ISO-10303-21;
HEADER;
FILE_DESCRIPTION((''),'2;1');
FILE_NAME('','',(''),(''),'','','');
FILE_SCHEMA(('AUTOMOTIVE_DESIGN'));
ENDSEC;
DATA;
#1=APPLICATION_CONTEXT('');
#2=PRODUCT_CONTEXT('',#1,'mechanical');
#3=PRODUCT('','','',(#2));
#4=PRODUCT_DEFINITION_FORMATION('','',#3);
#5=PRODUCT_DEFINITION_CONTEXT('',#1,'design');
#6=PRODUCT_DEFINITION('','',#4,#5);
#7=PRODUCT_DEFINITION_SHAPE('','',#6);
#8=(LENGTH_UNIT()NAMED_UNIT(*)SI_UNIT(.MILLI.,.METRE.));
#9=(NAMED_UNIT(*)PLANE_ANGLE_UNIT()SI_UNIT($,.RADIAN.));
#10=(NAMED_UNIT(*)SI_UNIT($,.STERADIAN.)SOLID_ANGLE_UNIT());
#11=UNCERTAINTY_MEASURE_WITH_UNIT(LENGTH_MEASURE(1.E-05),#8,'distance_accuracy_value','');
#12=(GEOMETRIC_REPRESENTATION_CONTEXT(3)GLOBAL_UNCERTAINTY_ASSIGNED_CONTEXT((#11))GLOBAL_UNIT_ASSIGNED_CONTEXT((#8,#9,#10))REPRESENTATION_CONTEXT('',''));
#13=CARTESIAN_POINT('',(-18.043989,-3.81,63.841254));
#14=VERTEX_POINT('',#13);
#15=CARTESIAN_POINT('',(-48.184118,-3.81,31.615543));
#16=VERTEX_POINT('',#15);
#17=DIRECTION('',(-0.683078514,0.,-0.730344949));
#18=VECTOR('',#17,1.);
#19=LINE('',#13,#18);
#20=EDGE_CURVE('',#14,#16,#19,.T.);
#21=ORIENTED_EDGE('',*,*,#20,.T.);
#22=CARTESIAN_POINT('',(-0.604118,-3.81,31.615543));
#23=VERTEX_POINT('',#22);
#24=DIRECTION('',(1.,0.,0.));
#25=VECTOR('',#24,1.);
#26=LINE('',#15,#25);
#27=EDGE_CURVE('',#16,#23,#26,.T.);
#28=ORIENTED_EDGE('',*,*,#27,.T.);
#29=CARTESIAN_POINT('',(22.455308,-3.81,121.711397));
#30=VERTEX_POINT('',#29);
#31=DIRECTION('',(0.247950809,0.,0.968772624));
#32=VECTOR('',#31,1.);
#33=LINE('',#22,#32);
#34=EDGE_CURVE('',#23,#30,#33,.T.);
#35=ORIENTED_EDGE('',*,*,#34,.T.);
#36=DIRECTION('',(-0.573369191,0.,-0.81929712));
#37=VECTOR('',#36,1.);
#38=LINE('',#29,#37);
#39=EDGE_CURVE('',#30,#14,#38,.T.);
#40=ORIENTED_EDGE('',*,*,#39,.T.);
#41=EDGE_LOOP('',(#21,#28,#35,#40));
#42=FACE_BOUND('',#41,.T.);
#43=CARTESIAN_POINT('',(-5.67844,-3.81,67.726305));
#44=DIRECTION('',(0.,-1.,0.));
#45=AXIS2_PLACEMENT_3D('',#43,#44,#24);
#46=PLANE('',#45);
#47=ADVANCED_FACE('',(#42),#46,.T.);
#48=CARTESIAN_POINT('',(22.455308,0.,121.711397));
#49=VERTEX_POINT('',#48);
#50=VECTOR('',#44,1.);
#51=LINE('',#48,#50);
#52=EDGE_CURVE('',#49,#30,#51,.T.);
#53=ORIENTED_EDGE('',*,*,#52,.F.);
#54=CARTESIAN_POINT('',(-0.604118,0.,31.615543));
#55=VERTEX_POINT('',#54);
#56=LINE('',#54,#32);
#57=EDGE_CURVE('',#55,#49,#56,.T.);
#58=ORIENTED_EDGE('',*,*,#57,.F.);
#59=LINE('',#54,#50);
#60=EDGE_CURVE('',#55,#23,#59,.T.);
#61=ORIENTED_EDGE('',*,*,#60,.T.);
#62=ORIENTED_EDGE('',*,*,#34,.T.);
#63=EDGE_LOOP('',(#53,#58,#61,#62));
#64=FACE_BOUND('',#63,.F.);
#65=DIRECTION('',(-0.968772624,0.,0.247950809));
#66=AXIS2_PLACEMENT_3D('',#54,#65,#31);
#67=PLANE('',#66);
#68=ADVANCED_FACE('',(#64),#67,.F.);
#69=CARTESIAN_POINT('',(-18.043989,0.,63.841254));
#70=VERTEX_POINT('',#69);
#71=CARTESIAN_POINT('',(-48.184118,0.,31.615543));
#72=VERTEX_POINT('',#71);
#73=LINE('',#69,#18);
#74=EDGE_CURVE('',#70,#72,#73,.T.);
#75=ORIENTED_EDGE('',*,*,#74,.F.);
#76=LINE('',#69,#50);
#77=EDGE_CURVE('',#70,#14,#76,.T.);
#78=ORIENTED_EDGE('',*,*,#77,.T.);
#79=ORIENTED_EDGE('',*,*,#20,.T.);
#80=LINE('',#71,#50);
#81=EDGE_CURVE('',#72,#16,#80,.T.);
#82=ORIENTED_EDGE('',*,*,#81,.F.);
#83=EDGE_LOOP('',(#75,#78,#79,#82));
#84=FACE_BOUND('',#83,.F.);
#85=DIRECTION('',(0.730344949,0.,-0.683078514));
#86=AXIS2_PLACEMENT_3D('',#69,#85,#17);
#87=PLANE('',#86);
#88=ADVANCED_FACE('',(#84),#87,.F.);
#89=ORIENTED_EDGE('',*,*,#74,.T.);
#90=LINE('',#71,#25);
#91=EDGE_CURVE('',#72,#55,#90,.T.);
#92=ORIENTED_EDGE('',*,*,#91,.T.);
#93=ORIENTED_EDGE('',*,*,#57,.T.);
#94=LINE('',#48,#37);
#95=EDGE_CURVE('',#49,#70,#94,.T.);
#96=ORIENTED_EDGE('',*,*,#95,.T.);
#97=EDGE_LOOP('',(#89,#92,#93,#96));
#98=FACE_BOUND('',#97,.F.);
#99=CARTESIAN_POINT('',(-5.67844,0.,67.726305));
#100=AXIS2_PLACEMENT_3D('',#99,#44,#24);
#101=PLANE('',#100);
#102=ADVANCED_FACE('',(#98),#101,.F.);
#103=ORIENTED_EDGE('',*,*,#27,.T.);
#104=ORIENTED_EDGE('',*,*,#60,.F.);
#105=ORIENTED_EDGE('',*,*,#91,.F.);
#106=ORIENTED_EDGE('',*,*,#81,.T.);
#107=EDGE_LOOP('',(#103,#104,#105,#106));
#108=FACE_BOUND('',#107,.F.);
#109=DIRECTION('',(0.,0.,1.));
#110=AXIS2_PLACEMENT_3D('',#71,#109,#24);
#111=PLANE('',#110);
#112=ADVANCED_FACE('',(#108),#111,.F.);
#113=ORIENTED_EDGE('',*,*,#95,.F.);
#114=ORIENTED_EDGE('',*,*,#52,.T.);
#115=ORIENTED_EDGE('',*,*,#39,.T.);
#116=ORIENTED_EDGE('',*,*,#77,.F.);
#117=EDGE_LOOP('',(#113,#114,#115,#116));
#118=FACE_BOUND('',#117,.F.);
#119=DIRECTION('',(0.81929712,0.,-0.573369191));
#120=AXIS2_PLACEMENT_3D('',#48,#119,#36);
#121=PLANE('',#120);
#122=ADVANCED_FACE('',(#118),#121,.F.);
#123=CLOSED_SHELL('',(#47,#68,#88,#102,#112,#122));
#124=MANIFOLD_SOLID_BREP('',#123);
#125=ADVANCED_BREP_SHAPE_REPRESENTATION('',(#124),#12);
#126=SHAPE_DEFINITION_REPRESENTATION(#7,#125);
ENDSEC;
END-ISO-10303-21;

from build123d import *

# Parameters (mm, degrees)
F1_DEPTH = 3.81


# Not quite as in the source:
# - a feature names something its author has since deleted; it is built from what else it names


with BuildPart() as f1:
    # F0 (on Front) → F1 (new body)
    with BuildSketch(Plane.XZ):
        Polygon((22.4553077279, 121.7113970666), (-18.0439893156, 63.8412535191), (-48.184117534, 31.6155430744), (-0.604117534, 31.6155430744), align=None)
    extrude(amount=F1_DEPTH)


solid = f1.part
